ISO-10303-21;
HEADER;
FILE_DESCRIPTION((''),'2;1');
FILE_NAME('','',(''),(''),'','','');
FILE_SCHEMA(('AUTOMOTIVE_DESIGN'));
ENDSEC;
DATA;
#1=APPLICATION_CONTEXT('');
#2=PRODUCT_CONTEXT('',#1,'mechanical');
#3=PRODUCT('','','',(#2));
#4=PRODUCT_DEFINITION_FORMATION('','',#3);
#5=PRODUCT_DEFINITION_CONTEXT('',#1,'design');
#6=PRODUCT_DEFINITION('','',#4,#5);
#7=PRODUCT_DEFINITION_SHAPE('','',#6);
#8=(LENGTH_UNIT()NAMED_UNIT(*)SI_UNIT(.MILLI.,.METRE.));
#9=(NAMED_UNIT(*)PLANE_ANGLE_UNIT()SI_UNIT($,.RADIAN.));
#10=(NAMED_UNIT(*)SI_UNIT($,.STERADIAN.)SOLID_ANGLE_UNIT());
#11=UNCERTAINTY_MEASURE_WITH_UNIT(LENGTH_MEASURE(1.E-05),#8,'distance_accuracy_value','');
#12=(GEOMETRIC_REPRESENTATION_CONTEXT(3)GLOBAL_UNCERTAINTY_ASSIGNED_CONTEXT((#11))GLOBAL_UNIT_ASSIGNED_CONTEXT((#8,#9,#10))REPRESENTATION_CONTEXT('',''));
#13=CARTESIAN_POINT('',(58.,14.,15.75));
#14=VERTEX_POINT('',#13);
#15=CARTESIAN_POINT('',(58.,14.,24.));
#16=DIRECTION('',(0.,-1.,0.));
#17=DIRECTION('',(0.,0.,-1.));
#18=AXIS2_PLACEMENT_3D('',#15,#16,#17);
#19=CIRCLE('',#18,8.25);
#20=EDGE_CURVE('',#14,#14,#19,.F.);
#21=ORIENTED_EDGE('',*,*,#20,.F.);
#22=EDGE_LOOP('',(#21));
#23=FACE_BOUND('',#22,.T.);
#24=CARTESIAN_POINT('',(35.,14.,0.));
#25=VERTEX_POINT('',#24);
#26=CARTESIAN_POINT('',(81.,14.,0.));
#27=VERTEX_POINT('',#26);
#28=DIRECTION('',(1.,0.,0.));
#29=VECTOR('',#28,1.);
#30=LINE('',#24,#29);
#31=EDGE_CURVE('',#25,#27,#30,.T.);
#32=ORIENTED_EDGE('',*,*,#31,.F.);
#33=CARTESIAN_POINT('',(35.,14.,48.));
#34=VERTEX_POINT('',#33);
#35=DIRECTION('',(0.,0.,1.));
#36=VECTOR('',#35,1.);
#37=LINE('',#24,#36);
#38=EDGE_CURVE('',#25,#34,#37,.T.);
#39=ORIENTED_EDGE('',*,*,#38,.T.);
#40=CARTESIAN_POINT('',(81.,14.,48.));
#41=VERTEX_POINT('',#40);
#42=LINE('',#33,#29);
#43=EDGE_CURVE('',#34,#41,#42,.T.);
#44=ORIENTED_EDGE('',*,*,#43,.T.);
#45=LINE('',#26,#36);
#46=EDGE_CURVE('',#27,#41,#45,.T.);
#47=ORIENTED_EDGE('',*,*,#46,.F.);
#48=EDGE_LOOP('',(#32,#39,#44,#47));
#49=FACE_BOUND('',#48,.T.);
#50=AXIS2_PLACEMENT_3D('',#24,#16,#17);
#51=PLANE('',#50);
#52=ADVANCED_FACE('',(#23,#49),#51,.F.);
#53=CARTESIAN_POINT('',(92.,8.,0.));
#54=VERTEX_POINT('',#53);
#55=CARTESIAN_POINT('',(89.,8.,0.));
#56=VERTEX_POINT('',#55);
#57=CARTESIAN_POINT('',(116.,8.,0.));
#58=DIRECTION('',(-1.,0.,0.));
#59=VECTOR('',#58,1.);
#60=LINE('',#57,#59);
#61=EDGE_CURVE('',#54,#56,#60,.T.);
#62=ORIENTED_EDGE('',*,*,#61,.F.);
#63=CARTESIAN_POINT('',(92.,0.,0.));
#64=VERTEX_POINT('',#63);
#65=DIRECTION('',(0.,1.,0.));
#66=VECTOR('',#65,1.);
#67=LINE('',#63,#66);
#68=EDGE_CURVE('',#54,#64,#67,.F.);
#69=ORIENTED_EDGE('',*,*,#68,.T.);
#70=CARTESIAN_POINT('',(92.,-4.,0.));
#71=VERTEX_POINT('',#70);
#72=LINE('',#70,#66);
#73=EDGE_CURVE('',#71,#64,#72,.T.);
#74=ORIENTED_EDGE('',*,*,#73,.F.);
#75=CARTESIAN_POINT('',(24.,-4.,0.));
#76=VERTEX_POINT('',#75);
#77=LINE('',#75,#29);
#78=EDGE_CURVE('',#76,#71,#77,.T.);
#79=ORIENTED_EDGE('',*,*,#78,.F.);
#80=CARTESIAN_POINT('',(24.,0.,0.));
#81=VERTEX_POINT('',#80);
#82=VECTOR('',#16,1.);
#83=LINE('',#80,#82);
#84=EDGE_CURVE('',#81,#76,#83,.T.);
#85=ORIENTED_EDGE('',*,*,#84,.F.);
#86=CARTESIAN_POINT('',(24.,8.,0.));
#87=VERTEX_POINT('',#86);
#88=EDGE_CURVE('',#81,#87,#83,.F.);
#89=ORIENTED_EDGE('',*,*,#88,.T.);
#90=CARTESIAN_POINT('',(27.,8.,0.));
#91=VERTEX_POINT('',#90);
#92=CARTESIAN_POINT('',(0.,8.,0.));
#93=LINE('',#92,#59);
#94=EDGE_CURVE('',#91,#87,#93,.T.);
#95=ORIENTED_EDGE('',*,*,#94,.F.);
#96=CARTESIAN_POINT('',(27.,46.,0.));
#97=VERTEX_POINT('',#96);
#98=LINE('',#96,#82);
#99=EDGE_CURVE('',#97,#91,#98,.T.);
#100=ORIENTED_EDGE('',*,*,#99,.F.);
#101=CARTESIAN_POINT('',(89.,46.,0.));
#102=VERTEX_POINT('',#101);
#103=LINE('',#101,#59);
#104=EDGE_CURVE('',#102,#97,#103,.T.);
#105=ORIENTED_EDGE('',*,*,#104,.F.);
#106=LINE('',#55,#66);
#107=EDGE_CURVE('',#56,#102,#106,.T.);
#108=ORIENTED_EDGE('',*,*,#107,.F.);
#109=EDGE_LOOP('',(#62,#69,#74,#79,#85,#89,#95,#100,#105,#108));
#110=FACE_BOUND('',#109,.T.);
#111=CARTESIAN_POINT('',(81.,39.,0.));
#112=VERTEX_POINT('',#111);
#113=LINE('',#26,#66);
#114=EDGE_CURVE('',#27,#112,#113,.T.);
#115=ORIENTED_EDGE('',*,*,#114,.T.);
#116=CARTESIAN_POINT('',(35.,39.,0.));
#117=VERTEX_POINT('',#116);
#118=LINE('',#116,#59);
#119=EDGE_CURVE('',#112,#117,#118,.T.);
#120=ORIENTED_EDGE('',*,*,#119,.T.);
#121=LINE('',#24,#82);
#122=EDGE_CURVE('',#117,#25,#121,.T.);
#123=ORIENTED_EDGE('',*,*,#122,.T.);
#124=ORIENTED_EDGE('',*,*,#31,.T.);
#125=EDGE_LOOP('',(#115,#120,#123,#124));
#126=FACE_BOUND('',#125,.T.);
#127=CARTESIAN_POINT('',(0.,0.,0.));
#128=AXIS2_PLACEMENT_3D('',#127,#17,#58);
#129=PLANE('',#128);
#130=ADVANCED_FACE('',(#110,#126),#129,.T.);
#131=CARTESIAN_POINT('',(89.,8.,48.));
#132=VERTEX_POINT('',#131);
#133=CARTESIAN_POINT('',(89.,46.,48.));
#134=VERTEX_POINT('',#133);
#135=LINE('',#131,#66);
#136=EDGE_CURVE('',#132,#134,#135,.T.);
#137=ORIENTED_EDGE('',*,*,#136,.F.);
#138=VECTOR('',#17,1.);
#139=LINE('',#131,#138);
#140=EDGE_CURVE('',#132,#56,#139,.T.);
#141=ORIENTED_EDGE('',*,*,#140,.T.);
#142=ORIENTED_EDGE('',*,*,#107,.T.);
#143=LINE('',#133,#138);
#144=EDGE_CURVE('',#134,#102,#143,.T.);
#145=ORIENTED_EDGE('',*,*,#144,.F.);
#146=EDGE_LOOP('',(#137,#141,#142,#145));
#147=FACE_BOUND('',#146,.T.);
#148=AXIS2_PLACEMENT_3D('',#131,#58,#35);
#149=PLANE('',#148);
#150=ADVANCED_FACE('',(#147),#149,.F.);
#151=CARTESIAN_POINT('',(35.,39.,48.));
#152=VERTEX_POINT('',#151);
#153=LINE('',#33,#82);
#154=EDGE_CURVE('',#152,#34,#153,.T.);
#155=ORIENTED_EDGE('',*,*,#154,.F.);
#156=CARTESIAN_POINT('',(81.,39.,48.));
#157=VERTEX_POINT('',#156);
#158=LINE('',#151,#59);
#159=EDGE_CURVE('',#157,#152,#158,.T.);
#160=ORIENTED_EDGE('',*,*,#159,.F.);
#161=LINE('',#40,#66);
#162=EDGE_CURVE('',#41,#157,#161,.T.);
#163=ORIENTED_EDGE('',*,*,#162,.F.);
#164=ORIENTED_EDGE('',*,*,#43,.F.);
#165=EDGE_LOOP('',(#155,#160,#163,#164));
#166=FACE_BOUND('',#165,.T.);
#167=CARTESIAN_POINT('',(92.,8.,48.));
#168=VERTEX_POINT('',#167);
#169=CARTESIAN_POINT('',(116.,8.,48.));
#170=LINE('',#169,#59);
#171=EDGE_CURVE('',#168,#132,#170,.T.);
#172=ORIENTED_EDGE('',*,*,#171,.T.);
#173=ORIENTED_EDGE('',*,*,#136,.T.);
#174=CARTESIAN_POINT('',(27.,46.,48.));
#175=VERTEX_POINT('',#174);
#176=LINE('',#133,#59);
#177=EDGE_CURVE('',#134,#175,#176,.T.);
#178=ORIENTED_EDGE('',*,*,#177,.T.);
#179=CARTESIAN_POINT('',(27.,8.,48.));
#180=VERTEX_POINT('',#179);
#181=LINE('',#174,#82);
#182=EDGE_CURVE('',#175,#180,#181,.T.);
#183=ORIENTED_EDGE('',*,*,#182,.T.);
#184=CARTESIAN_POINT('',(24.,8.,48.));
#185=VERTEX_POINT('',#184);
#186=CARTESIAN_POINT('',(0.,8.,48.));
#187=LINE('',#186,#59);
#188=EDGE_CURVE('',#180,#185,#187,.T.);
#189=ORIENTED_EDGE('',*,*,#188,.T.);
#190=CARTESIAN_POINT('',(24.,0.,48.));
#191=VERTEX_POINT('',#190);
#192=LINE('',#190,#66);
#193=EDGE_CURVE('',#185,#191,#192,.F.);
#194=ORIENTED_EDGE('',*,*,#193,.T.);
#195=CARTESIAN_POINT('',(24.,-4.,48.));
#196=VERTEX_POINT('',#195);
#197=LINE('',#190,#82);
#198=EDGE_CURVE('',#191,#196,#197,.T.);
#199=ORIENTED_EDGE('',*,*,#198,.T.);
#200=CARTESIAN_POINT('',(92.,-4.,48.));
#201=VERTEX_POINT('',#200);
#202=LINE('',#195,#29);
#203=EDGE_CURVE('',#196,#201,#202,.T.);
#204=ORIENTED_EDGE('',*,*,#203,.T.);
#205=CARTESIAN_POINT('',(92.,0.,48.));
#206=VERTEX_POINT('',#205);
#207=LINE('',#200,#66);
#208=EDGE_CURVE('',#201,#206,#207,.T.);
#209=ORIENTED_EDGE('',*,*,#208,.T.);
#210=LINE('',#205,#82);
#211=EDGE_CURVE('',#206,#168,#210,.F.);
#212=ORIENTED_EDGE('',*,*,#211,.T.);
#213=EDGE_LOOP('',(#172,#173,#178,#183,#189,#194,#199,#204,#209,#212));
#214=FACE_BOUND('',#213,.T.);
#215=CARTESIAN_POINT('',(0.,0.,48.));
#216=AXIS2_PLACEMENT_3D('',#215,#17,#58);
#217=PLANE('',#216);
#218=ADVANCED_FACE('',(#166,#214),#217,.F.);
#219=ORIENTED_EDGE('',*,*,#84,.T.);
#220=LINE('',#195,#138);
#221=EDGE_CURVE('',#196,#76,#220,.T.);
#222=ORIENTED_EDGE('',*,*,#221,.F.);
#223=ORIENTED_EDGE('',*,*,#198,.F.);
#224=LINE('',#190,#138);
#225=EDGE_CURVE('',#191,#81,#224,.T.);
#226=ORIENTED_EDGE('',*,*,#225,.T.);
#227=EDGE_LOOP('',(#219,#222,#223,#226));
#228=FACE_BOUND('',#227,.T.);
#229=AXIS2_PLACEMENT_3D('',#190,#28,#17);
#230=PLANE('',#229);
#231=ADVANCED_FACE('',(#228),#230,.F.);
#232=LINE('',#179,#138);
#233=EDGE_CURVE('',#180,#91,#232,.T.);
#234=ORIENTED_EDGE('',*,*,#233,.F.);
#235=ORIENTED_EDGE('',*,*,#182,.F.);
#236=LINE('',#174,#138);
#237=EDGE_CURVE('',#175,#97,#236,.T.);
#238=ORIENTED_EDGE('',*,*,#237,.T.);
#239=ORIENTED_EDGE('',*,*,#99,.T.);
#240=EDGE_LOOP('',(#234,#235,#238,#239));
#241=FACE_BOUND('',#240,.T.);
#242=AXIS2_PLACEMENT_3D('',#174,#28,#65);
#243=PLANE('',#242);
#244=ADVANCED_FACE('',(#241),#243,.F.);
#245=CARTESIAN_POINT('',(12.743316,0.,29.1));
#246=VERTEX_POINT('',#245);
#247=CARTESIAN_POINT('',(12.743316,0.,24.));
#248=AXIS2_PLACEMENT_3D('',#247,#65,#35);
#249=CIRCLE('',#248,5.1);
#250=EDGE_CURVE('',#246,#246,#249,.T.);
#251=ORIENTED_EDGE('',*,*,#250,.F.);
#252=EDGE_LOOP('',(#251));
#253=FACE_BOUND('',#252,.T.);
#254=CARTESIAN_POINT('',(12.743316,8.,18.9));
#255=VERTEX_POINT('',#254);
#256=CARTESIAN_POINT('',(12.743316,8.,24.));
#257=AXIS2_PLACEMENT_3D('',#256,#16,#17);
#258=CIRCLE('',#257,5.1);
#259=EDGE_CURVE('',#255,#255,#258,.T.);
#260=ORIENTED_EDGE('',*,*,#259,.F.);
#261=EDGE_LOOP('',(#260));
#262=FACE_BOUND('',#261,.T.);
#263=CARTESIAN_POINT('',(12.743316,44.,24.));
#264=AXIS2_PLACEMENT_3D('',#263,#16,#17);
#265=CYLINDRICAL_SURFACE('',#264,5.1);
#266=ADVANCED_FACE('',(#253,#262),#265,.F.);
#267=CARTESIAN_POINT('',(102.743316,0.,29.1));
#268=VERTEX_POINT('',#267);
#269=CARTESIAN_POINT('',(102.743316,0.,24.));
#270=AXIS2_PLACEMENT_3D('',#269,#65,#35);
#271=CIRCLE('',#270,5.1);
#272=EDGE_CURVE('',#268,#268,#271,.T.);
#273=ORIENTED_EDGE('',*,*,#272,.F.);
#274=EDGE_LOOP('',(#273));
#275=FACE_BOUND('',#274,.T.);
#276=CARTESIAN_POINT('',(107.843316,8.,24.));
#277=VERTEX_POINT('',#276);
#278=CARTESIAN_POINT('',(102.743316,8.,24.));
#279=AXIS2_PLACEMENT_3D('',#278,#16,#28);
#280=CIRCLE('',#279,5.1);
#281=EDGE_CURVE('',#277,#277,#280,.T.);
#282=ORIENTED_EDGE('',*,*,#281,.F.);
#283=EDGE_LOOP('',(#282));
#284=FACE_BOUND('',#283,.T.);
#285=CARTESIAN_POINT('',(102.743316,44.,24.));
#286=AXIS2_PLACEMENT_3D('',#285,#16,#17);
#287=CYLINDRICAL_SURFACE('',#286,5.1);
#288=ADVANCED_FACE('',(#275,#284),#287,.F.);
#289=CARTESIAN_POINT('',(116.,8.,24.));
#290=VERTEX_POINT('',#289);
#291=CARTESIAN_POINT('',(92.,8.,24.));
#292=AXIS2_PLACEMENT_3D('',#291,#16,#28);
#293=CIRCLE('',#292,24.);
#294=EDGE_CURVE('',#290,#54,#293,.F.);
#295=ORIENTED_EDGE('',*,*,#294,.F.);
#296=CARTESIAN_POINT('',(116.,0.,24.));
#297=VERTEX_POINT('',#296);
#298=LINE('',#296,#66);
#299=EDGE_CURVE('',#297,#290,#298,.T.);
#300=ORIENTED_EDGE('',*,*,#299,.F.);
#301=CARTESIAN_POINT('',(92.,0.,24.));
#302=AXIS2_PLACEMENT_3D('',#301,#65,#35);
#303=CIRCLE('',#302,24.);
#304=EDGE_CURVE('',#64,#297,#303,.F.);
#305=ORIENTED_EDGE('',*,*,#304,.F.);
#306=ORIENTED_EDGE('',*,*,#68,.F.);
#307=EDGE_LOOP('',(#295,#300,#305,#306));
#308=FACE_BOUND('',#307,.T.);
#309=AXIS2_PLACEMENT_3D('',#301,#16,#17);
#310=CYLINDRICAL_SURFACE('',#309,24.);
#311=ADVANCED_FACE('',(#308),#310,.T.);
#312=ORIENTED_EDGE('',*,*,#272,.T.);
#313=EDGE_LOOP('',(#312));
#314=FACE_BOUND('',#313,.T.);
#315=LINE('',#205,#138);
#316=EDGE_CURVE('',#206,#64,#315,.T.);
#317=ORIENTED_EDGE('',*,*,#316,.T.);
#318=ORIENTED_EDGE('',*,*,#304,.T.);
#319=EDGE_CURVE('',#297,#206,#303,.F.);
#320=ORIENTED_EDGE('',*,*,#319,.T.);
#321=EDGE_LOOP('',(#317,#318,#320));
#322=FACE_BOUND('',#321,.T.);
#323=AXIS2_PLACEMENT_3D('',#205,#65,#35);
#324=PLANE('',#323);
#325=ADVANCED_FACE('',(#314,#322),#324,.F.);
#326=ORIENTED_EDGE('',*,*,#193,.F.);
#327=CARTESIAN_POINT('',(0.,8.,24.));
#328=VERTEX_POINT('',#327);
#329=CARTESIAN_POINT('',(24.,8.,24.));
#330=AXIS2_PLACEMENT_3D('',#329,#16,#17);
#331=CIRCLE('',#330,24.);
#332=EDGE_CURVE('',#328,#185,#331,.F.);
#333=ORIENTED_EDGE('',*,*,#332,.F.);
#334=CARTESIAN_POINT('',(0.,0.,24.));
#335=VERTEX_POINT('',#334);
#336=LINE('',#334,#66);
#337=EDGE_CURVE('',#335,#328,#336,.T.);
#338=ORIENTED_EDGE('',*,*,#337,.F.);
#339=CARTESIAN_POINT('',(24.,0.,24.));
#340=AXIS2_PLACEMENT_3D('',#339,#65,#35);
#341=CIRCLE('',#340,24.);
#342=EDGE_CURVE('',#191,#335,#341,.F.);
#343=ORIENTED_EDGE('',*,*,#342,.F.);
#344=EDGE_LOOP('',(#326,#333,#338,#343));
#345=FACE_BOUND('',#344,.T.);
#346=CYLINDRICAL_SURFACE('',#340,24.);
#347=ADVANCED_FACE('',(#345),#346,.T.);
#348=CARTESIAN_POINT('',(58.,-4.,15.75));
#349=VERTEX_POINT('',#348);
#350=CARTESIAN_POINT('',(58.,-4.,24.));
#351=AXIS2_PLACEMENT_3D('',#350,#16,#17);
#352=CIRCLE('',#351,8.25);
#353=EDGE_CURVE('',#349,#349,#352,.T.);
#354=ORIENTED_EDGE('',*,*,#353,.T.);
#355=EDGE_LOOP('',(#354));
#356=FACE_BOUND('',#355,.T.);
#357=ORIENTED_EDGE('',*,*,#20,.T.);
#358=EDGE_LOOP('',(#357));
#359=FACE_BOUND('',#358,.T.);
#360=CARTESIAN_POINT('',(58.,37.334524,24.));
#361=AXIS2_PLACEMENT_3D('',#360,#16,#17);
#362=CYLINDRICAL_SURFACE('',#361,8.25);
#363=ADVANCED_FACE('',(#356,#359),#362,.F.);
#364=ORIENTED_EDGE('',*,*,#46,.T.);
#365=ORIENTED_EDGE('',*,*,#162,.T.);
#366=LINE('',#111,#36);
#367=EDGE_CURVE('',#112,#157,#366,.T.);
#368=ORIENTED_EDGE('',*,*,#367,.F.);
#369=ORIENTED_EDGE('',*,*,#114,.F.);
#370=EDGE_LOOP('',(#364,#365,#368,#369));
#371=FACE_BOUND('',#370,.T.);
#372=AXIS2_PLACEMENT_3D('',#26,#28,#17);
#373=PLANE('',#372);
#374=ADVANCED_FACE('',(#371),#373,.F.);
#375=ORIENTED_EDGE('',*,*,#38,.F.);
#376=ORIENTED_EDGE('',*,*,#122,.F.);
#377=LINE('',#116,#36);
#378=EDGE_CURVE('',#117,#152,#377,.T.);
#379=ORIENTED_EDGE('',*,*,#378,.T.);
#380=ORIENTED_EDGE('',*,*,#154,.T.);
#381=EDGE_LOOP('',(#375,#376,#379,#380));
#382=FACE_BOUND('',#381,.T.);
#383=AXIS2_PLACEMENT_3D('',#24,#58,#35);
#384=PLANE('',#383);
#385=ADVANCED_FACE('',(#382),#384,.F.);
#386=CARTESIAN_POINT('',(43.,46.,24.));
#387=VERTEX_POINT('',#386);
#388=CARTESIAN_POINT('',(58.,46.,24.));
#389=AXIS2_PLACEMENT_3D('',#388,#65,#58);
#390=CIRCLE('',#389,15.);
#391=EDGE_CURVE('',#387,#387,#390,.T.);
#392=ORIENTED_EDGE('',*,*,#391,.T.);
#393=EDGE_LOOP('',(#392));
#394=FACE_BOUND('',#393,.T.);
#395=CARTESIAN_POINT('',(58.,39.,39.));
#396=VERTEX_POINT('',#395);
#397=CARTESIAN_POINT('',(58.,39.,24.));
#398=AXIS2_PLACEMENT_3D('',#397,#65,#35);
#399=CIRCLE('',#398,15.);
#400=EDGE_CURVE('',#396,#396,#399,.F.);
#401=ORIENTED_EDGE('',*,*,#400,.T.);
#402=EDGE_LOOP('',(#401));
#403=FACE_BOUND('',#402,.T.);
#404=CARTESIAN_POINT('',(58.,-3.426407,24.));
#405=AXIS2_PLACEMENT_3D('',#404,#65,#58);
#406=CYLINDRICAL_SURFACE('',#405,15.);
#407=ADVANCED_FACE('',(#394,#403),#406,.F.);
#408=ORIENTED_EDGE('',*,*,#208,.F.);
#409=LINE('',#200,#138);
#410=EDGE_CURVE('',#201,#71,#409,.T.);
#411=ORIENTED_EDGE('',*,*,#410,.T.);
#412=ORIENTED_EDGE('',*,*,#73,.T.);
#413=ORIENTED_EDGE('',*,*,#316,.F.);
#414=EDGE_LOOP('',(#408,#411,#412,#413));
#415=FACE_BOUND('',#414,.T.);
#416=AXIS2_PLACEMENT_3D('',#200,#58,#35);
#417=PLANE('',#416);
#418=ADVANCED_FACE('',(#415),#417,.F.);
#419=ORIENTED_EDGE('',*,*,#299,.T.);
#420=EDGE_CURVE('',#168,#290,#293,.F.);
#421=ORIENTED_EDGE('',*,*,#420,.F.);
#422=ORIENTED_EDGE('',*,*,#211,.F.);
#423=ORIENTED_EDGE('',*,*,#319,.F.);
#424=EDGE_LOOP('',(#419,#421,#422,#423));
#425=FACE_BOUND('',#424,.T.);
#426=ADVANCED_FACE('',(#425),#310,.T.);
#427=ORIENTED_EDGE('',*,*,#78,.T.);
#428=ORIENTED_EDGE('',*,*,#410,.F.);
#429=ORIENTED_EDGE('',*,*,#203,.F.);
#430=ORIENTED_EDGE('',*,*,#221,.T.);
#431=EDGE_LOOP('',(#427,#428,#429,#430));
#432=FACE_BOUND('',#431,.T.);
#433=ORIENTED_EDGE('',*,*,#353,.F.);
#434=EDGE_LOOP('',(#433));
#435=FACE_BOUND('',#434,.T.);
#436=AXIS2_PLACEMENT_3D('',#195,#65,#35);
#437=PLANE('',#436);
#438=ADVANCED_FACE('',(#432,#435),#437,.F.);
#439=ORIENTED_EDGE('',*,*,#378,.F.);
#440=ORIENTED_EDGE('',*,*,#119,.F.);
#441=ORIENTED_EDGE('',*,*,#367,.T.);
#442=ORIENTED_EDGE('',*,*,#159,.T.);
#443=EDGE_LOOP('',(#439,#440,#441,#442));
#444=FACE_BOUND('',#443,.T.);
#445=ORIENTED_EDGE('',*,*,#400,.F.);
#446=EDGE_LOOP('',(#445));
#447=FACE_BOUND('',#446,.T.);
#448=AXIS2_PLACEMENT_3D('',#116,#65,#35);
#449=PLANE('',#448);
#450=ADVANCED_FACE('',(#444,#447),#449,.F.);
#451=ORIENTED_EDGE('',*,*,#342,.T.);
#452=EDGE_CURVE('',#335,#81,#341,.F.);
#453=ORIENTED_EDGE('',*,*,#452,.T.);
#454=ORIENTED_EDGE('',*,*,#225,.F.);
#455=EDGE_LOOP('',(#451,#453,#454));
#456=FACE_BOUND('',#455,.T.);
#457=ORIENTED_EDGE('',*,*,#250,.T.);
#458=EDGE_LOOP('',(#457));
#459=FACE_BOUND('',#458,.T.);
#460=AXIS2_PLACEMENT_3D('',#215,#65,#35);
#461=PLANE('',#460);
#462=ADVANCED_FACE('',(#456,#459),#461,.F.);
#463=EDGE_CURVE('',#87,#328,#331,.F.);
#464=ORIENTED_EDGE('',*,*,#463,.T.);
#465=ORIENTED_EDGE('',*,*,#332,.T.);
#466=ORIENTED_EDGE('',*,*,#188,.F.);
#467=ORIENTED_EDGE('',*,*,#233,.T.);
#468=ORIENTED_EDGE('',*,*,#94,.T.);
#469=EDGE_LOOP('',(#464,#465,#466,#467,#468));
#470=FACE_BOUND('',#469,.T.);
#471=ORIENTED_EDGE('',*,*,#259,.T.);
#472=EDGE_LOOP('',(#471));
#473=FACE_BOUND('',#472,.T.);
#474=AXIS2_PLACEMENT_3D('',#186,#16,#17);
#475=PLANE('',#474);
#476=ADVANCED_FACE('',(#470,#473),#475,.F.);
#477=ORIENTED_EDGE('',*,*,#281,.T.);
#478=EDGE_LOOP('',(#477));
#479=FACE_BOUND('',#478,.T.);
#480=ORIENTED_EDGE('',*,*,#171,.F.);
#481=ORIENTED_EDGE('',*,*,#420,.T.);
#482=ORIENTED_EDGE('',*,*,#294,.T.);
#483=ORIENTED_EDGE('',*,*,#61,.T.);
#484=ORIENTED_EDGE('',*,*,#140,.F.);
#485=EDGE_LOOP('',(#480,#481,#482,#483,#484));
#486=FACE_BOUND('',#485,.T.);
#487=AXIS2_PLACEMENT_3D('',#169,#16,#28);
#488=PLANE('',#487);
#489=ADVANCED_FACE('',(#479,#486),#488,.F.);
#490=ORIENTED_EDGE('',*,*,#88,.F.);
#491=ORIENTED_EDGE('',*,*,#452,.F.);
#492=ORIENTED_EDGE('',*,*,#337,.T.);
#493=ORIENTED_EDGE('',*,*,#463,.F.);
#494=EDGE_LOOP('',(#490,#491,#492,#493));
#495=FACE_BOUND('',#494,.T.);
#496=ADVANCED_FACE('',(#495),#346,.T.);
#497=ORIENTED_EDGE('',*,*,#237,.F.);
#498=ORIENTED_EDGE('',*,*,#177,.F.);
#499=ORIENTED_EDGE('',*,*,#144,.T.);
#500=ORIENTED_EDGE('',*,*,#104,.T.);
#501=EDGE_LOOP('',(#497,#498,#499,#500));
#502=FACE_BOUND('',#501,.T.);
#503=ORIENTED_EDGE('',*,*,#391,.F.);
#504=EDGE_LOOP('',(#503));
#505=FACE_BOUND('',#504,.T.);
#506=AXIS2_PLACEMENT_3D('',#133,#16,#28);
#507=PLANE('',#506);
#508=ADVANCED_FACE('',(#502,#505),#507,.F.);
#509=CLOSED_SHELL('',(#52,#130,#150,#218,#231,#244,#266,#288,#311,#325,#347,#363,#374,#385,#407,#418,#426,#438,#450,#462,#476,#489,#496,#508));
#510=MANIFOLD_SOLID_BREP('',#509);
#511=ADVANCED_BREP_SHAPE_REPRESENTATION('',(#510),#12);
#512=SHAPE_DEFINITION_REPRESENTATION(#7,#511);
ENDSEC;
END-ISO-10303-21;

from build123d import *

# Parameters (mm, degrees)
EXTRUDE_1_DEPTH     = 48
FILLET_1_R          = 24
FILLET_2_R          = 24
FILLET_3_R          = 24
FILLET_4_R          = 24
SKETCH_8_W          = 46
SKETCH_8_H          = 25
CUT_EXTRUDE_2_DEPTH = 134.701159307
SKETCH_9_R          = 5.1
CUT_EXTRUDE_3_DEPTH = 48
SKETCH_11_R         = 8.25
CUT_EXTRUDE_4_DEPTH = 18
SKETCH_12_R         = 15
CUT_EXTRUDE_5_DEPTH = 7


with BuildPart() as part:
    # Эскиз1 → Бобышка-Вытянуть1 (new body)
    with BuildSketch(Plane.XY):
        Polygon((0, 0), (24, 0), (24, -4), (92, -4), (92, 0), (116, 0), (116, 8), (89, 8), (89, 46), (27, 46), (27, 8), (0, 8), align=None)
    extrude(amount=EXTRUDE_1_DEPTH)

    # Скругление1
    fillet_1_edges = [part.edges().sort_by_distance(p)[0] for p in [
        (0, 4, 48),
    ]]
    fillet(fillet_1_edges, radius=FILLET_1_R)

    # Скругление2
    fillet_2_edges = [part.edges().sort_by_distance(p)[0] for p in [
        (0, 4, 0),
    ]]
    fillet(fillet_2_edges, radius=FILLET_2_R - 0.0001)  # a hair under: the kernel refuses the full size

    # Скругление3
    fillet_3_edges = [part.edges().sort_by_distance(p)[0] for p in [
        (116, 4, 0),
    ]]
    fillet(fillet_3_edges, radius=FILLET_3_R)

    # Скругление4
    fillet_4_edges = [part.edges().sort_by_distance(p)[0] for p in [
        (116, 4, 48),
    ]]
    fillet(fillet_4_edges, radius=FILLET_4_R - 0.0001)  # a hair under: the kernel refuses the full size

    # Эскиз8 → Вырез-Вытянуть2 (cut, through all)
    with BuildSketch(Plane.XY.offset(48)):
        with Locations((58, 26.5)):
            Rectangle(SKETCH_8_W, SKETCH_8_H)
    extrude(amount=-CUT_EXTRUDE_2_DEPTH, mode=Mode.SUBTRACT)

    # Эскиз9 → Вырез-Вытянуть3 (cut)
    with BuildSketch(Plane.XZ.offset(4)):
        with Locations(Location((12.743315918, 24, 0), (0, 0, 270))):
            Circle(SKETCH_9_R)
        with Locations((102.743315918, 24)):
            Circle(SKETCH_9_R)
    extrude(amount=-CUT_EXTRUDE_3_DEPTH, mode=Mode.SUBTRACT)

    # Эскиз11 → Вырез-Вытянуть4 (cut)
    with BuildSketch(Plane.XZ.offset(4)):
        with Locations(Location((58, 24, 0), (0, 0, 270))):
            Circle(SKETCH_11_R)
    extrude(amount=-CUT_EXTRUDE_4_DEPTH, mode=Mode.SUBTRACT)

    # Эскиз12 → Вырез-Вытянуть5 (cut)
    with BuildSketch(Plane(origin=(0, 46, 0), x_dir=(1, 0, 0), z_dir=(0, 1, 0))):
        with Locations(Location((58, -24, 0), (0, 0, 180))):
            Circle(SKETCH_12_R)
    extrude(amount=-CUT_EXTRUDE_5_DEPTH, mode=Mode.SUBTRACT)


solid = part.part
